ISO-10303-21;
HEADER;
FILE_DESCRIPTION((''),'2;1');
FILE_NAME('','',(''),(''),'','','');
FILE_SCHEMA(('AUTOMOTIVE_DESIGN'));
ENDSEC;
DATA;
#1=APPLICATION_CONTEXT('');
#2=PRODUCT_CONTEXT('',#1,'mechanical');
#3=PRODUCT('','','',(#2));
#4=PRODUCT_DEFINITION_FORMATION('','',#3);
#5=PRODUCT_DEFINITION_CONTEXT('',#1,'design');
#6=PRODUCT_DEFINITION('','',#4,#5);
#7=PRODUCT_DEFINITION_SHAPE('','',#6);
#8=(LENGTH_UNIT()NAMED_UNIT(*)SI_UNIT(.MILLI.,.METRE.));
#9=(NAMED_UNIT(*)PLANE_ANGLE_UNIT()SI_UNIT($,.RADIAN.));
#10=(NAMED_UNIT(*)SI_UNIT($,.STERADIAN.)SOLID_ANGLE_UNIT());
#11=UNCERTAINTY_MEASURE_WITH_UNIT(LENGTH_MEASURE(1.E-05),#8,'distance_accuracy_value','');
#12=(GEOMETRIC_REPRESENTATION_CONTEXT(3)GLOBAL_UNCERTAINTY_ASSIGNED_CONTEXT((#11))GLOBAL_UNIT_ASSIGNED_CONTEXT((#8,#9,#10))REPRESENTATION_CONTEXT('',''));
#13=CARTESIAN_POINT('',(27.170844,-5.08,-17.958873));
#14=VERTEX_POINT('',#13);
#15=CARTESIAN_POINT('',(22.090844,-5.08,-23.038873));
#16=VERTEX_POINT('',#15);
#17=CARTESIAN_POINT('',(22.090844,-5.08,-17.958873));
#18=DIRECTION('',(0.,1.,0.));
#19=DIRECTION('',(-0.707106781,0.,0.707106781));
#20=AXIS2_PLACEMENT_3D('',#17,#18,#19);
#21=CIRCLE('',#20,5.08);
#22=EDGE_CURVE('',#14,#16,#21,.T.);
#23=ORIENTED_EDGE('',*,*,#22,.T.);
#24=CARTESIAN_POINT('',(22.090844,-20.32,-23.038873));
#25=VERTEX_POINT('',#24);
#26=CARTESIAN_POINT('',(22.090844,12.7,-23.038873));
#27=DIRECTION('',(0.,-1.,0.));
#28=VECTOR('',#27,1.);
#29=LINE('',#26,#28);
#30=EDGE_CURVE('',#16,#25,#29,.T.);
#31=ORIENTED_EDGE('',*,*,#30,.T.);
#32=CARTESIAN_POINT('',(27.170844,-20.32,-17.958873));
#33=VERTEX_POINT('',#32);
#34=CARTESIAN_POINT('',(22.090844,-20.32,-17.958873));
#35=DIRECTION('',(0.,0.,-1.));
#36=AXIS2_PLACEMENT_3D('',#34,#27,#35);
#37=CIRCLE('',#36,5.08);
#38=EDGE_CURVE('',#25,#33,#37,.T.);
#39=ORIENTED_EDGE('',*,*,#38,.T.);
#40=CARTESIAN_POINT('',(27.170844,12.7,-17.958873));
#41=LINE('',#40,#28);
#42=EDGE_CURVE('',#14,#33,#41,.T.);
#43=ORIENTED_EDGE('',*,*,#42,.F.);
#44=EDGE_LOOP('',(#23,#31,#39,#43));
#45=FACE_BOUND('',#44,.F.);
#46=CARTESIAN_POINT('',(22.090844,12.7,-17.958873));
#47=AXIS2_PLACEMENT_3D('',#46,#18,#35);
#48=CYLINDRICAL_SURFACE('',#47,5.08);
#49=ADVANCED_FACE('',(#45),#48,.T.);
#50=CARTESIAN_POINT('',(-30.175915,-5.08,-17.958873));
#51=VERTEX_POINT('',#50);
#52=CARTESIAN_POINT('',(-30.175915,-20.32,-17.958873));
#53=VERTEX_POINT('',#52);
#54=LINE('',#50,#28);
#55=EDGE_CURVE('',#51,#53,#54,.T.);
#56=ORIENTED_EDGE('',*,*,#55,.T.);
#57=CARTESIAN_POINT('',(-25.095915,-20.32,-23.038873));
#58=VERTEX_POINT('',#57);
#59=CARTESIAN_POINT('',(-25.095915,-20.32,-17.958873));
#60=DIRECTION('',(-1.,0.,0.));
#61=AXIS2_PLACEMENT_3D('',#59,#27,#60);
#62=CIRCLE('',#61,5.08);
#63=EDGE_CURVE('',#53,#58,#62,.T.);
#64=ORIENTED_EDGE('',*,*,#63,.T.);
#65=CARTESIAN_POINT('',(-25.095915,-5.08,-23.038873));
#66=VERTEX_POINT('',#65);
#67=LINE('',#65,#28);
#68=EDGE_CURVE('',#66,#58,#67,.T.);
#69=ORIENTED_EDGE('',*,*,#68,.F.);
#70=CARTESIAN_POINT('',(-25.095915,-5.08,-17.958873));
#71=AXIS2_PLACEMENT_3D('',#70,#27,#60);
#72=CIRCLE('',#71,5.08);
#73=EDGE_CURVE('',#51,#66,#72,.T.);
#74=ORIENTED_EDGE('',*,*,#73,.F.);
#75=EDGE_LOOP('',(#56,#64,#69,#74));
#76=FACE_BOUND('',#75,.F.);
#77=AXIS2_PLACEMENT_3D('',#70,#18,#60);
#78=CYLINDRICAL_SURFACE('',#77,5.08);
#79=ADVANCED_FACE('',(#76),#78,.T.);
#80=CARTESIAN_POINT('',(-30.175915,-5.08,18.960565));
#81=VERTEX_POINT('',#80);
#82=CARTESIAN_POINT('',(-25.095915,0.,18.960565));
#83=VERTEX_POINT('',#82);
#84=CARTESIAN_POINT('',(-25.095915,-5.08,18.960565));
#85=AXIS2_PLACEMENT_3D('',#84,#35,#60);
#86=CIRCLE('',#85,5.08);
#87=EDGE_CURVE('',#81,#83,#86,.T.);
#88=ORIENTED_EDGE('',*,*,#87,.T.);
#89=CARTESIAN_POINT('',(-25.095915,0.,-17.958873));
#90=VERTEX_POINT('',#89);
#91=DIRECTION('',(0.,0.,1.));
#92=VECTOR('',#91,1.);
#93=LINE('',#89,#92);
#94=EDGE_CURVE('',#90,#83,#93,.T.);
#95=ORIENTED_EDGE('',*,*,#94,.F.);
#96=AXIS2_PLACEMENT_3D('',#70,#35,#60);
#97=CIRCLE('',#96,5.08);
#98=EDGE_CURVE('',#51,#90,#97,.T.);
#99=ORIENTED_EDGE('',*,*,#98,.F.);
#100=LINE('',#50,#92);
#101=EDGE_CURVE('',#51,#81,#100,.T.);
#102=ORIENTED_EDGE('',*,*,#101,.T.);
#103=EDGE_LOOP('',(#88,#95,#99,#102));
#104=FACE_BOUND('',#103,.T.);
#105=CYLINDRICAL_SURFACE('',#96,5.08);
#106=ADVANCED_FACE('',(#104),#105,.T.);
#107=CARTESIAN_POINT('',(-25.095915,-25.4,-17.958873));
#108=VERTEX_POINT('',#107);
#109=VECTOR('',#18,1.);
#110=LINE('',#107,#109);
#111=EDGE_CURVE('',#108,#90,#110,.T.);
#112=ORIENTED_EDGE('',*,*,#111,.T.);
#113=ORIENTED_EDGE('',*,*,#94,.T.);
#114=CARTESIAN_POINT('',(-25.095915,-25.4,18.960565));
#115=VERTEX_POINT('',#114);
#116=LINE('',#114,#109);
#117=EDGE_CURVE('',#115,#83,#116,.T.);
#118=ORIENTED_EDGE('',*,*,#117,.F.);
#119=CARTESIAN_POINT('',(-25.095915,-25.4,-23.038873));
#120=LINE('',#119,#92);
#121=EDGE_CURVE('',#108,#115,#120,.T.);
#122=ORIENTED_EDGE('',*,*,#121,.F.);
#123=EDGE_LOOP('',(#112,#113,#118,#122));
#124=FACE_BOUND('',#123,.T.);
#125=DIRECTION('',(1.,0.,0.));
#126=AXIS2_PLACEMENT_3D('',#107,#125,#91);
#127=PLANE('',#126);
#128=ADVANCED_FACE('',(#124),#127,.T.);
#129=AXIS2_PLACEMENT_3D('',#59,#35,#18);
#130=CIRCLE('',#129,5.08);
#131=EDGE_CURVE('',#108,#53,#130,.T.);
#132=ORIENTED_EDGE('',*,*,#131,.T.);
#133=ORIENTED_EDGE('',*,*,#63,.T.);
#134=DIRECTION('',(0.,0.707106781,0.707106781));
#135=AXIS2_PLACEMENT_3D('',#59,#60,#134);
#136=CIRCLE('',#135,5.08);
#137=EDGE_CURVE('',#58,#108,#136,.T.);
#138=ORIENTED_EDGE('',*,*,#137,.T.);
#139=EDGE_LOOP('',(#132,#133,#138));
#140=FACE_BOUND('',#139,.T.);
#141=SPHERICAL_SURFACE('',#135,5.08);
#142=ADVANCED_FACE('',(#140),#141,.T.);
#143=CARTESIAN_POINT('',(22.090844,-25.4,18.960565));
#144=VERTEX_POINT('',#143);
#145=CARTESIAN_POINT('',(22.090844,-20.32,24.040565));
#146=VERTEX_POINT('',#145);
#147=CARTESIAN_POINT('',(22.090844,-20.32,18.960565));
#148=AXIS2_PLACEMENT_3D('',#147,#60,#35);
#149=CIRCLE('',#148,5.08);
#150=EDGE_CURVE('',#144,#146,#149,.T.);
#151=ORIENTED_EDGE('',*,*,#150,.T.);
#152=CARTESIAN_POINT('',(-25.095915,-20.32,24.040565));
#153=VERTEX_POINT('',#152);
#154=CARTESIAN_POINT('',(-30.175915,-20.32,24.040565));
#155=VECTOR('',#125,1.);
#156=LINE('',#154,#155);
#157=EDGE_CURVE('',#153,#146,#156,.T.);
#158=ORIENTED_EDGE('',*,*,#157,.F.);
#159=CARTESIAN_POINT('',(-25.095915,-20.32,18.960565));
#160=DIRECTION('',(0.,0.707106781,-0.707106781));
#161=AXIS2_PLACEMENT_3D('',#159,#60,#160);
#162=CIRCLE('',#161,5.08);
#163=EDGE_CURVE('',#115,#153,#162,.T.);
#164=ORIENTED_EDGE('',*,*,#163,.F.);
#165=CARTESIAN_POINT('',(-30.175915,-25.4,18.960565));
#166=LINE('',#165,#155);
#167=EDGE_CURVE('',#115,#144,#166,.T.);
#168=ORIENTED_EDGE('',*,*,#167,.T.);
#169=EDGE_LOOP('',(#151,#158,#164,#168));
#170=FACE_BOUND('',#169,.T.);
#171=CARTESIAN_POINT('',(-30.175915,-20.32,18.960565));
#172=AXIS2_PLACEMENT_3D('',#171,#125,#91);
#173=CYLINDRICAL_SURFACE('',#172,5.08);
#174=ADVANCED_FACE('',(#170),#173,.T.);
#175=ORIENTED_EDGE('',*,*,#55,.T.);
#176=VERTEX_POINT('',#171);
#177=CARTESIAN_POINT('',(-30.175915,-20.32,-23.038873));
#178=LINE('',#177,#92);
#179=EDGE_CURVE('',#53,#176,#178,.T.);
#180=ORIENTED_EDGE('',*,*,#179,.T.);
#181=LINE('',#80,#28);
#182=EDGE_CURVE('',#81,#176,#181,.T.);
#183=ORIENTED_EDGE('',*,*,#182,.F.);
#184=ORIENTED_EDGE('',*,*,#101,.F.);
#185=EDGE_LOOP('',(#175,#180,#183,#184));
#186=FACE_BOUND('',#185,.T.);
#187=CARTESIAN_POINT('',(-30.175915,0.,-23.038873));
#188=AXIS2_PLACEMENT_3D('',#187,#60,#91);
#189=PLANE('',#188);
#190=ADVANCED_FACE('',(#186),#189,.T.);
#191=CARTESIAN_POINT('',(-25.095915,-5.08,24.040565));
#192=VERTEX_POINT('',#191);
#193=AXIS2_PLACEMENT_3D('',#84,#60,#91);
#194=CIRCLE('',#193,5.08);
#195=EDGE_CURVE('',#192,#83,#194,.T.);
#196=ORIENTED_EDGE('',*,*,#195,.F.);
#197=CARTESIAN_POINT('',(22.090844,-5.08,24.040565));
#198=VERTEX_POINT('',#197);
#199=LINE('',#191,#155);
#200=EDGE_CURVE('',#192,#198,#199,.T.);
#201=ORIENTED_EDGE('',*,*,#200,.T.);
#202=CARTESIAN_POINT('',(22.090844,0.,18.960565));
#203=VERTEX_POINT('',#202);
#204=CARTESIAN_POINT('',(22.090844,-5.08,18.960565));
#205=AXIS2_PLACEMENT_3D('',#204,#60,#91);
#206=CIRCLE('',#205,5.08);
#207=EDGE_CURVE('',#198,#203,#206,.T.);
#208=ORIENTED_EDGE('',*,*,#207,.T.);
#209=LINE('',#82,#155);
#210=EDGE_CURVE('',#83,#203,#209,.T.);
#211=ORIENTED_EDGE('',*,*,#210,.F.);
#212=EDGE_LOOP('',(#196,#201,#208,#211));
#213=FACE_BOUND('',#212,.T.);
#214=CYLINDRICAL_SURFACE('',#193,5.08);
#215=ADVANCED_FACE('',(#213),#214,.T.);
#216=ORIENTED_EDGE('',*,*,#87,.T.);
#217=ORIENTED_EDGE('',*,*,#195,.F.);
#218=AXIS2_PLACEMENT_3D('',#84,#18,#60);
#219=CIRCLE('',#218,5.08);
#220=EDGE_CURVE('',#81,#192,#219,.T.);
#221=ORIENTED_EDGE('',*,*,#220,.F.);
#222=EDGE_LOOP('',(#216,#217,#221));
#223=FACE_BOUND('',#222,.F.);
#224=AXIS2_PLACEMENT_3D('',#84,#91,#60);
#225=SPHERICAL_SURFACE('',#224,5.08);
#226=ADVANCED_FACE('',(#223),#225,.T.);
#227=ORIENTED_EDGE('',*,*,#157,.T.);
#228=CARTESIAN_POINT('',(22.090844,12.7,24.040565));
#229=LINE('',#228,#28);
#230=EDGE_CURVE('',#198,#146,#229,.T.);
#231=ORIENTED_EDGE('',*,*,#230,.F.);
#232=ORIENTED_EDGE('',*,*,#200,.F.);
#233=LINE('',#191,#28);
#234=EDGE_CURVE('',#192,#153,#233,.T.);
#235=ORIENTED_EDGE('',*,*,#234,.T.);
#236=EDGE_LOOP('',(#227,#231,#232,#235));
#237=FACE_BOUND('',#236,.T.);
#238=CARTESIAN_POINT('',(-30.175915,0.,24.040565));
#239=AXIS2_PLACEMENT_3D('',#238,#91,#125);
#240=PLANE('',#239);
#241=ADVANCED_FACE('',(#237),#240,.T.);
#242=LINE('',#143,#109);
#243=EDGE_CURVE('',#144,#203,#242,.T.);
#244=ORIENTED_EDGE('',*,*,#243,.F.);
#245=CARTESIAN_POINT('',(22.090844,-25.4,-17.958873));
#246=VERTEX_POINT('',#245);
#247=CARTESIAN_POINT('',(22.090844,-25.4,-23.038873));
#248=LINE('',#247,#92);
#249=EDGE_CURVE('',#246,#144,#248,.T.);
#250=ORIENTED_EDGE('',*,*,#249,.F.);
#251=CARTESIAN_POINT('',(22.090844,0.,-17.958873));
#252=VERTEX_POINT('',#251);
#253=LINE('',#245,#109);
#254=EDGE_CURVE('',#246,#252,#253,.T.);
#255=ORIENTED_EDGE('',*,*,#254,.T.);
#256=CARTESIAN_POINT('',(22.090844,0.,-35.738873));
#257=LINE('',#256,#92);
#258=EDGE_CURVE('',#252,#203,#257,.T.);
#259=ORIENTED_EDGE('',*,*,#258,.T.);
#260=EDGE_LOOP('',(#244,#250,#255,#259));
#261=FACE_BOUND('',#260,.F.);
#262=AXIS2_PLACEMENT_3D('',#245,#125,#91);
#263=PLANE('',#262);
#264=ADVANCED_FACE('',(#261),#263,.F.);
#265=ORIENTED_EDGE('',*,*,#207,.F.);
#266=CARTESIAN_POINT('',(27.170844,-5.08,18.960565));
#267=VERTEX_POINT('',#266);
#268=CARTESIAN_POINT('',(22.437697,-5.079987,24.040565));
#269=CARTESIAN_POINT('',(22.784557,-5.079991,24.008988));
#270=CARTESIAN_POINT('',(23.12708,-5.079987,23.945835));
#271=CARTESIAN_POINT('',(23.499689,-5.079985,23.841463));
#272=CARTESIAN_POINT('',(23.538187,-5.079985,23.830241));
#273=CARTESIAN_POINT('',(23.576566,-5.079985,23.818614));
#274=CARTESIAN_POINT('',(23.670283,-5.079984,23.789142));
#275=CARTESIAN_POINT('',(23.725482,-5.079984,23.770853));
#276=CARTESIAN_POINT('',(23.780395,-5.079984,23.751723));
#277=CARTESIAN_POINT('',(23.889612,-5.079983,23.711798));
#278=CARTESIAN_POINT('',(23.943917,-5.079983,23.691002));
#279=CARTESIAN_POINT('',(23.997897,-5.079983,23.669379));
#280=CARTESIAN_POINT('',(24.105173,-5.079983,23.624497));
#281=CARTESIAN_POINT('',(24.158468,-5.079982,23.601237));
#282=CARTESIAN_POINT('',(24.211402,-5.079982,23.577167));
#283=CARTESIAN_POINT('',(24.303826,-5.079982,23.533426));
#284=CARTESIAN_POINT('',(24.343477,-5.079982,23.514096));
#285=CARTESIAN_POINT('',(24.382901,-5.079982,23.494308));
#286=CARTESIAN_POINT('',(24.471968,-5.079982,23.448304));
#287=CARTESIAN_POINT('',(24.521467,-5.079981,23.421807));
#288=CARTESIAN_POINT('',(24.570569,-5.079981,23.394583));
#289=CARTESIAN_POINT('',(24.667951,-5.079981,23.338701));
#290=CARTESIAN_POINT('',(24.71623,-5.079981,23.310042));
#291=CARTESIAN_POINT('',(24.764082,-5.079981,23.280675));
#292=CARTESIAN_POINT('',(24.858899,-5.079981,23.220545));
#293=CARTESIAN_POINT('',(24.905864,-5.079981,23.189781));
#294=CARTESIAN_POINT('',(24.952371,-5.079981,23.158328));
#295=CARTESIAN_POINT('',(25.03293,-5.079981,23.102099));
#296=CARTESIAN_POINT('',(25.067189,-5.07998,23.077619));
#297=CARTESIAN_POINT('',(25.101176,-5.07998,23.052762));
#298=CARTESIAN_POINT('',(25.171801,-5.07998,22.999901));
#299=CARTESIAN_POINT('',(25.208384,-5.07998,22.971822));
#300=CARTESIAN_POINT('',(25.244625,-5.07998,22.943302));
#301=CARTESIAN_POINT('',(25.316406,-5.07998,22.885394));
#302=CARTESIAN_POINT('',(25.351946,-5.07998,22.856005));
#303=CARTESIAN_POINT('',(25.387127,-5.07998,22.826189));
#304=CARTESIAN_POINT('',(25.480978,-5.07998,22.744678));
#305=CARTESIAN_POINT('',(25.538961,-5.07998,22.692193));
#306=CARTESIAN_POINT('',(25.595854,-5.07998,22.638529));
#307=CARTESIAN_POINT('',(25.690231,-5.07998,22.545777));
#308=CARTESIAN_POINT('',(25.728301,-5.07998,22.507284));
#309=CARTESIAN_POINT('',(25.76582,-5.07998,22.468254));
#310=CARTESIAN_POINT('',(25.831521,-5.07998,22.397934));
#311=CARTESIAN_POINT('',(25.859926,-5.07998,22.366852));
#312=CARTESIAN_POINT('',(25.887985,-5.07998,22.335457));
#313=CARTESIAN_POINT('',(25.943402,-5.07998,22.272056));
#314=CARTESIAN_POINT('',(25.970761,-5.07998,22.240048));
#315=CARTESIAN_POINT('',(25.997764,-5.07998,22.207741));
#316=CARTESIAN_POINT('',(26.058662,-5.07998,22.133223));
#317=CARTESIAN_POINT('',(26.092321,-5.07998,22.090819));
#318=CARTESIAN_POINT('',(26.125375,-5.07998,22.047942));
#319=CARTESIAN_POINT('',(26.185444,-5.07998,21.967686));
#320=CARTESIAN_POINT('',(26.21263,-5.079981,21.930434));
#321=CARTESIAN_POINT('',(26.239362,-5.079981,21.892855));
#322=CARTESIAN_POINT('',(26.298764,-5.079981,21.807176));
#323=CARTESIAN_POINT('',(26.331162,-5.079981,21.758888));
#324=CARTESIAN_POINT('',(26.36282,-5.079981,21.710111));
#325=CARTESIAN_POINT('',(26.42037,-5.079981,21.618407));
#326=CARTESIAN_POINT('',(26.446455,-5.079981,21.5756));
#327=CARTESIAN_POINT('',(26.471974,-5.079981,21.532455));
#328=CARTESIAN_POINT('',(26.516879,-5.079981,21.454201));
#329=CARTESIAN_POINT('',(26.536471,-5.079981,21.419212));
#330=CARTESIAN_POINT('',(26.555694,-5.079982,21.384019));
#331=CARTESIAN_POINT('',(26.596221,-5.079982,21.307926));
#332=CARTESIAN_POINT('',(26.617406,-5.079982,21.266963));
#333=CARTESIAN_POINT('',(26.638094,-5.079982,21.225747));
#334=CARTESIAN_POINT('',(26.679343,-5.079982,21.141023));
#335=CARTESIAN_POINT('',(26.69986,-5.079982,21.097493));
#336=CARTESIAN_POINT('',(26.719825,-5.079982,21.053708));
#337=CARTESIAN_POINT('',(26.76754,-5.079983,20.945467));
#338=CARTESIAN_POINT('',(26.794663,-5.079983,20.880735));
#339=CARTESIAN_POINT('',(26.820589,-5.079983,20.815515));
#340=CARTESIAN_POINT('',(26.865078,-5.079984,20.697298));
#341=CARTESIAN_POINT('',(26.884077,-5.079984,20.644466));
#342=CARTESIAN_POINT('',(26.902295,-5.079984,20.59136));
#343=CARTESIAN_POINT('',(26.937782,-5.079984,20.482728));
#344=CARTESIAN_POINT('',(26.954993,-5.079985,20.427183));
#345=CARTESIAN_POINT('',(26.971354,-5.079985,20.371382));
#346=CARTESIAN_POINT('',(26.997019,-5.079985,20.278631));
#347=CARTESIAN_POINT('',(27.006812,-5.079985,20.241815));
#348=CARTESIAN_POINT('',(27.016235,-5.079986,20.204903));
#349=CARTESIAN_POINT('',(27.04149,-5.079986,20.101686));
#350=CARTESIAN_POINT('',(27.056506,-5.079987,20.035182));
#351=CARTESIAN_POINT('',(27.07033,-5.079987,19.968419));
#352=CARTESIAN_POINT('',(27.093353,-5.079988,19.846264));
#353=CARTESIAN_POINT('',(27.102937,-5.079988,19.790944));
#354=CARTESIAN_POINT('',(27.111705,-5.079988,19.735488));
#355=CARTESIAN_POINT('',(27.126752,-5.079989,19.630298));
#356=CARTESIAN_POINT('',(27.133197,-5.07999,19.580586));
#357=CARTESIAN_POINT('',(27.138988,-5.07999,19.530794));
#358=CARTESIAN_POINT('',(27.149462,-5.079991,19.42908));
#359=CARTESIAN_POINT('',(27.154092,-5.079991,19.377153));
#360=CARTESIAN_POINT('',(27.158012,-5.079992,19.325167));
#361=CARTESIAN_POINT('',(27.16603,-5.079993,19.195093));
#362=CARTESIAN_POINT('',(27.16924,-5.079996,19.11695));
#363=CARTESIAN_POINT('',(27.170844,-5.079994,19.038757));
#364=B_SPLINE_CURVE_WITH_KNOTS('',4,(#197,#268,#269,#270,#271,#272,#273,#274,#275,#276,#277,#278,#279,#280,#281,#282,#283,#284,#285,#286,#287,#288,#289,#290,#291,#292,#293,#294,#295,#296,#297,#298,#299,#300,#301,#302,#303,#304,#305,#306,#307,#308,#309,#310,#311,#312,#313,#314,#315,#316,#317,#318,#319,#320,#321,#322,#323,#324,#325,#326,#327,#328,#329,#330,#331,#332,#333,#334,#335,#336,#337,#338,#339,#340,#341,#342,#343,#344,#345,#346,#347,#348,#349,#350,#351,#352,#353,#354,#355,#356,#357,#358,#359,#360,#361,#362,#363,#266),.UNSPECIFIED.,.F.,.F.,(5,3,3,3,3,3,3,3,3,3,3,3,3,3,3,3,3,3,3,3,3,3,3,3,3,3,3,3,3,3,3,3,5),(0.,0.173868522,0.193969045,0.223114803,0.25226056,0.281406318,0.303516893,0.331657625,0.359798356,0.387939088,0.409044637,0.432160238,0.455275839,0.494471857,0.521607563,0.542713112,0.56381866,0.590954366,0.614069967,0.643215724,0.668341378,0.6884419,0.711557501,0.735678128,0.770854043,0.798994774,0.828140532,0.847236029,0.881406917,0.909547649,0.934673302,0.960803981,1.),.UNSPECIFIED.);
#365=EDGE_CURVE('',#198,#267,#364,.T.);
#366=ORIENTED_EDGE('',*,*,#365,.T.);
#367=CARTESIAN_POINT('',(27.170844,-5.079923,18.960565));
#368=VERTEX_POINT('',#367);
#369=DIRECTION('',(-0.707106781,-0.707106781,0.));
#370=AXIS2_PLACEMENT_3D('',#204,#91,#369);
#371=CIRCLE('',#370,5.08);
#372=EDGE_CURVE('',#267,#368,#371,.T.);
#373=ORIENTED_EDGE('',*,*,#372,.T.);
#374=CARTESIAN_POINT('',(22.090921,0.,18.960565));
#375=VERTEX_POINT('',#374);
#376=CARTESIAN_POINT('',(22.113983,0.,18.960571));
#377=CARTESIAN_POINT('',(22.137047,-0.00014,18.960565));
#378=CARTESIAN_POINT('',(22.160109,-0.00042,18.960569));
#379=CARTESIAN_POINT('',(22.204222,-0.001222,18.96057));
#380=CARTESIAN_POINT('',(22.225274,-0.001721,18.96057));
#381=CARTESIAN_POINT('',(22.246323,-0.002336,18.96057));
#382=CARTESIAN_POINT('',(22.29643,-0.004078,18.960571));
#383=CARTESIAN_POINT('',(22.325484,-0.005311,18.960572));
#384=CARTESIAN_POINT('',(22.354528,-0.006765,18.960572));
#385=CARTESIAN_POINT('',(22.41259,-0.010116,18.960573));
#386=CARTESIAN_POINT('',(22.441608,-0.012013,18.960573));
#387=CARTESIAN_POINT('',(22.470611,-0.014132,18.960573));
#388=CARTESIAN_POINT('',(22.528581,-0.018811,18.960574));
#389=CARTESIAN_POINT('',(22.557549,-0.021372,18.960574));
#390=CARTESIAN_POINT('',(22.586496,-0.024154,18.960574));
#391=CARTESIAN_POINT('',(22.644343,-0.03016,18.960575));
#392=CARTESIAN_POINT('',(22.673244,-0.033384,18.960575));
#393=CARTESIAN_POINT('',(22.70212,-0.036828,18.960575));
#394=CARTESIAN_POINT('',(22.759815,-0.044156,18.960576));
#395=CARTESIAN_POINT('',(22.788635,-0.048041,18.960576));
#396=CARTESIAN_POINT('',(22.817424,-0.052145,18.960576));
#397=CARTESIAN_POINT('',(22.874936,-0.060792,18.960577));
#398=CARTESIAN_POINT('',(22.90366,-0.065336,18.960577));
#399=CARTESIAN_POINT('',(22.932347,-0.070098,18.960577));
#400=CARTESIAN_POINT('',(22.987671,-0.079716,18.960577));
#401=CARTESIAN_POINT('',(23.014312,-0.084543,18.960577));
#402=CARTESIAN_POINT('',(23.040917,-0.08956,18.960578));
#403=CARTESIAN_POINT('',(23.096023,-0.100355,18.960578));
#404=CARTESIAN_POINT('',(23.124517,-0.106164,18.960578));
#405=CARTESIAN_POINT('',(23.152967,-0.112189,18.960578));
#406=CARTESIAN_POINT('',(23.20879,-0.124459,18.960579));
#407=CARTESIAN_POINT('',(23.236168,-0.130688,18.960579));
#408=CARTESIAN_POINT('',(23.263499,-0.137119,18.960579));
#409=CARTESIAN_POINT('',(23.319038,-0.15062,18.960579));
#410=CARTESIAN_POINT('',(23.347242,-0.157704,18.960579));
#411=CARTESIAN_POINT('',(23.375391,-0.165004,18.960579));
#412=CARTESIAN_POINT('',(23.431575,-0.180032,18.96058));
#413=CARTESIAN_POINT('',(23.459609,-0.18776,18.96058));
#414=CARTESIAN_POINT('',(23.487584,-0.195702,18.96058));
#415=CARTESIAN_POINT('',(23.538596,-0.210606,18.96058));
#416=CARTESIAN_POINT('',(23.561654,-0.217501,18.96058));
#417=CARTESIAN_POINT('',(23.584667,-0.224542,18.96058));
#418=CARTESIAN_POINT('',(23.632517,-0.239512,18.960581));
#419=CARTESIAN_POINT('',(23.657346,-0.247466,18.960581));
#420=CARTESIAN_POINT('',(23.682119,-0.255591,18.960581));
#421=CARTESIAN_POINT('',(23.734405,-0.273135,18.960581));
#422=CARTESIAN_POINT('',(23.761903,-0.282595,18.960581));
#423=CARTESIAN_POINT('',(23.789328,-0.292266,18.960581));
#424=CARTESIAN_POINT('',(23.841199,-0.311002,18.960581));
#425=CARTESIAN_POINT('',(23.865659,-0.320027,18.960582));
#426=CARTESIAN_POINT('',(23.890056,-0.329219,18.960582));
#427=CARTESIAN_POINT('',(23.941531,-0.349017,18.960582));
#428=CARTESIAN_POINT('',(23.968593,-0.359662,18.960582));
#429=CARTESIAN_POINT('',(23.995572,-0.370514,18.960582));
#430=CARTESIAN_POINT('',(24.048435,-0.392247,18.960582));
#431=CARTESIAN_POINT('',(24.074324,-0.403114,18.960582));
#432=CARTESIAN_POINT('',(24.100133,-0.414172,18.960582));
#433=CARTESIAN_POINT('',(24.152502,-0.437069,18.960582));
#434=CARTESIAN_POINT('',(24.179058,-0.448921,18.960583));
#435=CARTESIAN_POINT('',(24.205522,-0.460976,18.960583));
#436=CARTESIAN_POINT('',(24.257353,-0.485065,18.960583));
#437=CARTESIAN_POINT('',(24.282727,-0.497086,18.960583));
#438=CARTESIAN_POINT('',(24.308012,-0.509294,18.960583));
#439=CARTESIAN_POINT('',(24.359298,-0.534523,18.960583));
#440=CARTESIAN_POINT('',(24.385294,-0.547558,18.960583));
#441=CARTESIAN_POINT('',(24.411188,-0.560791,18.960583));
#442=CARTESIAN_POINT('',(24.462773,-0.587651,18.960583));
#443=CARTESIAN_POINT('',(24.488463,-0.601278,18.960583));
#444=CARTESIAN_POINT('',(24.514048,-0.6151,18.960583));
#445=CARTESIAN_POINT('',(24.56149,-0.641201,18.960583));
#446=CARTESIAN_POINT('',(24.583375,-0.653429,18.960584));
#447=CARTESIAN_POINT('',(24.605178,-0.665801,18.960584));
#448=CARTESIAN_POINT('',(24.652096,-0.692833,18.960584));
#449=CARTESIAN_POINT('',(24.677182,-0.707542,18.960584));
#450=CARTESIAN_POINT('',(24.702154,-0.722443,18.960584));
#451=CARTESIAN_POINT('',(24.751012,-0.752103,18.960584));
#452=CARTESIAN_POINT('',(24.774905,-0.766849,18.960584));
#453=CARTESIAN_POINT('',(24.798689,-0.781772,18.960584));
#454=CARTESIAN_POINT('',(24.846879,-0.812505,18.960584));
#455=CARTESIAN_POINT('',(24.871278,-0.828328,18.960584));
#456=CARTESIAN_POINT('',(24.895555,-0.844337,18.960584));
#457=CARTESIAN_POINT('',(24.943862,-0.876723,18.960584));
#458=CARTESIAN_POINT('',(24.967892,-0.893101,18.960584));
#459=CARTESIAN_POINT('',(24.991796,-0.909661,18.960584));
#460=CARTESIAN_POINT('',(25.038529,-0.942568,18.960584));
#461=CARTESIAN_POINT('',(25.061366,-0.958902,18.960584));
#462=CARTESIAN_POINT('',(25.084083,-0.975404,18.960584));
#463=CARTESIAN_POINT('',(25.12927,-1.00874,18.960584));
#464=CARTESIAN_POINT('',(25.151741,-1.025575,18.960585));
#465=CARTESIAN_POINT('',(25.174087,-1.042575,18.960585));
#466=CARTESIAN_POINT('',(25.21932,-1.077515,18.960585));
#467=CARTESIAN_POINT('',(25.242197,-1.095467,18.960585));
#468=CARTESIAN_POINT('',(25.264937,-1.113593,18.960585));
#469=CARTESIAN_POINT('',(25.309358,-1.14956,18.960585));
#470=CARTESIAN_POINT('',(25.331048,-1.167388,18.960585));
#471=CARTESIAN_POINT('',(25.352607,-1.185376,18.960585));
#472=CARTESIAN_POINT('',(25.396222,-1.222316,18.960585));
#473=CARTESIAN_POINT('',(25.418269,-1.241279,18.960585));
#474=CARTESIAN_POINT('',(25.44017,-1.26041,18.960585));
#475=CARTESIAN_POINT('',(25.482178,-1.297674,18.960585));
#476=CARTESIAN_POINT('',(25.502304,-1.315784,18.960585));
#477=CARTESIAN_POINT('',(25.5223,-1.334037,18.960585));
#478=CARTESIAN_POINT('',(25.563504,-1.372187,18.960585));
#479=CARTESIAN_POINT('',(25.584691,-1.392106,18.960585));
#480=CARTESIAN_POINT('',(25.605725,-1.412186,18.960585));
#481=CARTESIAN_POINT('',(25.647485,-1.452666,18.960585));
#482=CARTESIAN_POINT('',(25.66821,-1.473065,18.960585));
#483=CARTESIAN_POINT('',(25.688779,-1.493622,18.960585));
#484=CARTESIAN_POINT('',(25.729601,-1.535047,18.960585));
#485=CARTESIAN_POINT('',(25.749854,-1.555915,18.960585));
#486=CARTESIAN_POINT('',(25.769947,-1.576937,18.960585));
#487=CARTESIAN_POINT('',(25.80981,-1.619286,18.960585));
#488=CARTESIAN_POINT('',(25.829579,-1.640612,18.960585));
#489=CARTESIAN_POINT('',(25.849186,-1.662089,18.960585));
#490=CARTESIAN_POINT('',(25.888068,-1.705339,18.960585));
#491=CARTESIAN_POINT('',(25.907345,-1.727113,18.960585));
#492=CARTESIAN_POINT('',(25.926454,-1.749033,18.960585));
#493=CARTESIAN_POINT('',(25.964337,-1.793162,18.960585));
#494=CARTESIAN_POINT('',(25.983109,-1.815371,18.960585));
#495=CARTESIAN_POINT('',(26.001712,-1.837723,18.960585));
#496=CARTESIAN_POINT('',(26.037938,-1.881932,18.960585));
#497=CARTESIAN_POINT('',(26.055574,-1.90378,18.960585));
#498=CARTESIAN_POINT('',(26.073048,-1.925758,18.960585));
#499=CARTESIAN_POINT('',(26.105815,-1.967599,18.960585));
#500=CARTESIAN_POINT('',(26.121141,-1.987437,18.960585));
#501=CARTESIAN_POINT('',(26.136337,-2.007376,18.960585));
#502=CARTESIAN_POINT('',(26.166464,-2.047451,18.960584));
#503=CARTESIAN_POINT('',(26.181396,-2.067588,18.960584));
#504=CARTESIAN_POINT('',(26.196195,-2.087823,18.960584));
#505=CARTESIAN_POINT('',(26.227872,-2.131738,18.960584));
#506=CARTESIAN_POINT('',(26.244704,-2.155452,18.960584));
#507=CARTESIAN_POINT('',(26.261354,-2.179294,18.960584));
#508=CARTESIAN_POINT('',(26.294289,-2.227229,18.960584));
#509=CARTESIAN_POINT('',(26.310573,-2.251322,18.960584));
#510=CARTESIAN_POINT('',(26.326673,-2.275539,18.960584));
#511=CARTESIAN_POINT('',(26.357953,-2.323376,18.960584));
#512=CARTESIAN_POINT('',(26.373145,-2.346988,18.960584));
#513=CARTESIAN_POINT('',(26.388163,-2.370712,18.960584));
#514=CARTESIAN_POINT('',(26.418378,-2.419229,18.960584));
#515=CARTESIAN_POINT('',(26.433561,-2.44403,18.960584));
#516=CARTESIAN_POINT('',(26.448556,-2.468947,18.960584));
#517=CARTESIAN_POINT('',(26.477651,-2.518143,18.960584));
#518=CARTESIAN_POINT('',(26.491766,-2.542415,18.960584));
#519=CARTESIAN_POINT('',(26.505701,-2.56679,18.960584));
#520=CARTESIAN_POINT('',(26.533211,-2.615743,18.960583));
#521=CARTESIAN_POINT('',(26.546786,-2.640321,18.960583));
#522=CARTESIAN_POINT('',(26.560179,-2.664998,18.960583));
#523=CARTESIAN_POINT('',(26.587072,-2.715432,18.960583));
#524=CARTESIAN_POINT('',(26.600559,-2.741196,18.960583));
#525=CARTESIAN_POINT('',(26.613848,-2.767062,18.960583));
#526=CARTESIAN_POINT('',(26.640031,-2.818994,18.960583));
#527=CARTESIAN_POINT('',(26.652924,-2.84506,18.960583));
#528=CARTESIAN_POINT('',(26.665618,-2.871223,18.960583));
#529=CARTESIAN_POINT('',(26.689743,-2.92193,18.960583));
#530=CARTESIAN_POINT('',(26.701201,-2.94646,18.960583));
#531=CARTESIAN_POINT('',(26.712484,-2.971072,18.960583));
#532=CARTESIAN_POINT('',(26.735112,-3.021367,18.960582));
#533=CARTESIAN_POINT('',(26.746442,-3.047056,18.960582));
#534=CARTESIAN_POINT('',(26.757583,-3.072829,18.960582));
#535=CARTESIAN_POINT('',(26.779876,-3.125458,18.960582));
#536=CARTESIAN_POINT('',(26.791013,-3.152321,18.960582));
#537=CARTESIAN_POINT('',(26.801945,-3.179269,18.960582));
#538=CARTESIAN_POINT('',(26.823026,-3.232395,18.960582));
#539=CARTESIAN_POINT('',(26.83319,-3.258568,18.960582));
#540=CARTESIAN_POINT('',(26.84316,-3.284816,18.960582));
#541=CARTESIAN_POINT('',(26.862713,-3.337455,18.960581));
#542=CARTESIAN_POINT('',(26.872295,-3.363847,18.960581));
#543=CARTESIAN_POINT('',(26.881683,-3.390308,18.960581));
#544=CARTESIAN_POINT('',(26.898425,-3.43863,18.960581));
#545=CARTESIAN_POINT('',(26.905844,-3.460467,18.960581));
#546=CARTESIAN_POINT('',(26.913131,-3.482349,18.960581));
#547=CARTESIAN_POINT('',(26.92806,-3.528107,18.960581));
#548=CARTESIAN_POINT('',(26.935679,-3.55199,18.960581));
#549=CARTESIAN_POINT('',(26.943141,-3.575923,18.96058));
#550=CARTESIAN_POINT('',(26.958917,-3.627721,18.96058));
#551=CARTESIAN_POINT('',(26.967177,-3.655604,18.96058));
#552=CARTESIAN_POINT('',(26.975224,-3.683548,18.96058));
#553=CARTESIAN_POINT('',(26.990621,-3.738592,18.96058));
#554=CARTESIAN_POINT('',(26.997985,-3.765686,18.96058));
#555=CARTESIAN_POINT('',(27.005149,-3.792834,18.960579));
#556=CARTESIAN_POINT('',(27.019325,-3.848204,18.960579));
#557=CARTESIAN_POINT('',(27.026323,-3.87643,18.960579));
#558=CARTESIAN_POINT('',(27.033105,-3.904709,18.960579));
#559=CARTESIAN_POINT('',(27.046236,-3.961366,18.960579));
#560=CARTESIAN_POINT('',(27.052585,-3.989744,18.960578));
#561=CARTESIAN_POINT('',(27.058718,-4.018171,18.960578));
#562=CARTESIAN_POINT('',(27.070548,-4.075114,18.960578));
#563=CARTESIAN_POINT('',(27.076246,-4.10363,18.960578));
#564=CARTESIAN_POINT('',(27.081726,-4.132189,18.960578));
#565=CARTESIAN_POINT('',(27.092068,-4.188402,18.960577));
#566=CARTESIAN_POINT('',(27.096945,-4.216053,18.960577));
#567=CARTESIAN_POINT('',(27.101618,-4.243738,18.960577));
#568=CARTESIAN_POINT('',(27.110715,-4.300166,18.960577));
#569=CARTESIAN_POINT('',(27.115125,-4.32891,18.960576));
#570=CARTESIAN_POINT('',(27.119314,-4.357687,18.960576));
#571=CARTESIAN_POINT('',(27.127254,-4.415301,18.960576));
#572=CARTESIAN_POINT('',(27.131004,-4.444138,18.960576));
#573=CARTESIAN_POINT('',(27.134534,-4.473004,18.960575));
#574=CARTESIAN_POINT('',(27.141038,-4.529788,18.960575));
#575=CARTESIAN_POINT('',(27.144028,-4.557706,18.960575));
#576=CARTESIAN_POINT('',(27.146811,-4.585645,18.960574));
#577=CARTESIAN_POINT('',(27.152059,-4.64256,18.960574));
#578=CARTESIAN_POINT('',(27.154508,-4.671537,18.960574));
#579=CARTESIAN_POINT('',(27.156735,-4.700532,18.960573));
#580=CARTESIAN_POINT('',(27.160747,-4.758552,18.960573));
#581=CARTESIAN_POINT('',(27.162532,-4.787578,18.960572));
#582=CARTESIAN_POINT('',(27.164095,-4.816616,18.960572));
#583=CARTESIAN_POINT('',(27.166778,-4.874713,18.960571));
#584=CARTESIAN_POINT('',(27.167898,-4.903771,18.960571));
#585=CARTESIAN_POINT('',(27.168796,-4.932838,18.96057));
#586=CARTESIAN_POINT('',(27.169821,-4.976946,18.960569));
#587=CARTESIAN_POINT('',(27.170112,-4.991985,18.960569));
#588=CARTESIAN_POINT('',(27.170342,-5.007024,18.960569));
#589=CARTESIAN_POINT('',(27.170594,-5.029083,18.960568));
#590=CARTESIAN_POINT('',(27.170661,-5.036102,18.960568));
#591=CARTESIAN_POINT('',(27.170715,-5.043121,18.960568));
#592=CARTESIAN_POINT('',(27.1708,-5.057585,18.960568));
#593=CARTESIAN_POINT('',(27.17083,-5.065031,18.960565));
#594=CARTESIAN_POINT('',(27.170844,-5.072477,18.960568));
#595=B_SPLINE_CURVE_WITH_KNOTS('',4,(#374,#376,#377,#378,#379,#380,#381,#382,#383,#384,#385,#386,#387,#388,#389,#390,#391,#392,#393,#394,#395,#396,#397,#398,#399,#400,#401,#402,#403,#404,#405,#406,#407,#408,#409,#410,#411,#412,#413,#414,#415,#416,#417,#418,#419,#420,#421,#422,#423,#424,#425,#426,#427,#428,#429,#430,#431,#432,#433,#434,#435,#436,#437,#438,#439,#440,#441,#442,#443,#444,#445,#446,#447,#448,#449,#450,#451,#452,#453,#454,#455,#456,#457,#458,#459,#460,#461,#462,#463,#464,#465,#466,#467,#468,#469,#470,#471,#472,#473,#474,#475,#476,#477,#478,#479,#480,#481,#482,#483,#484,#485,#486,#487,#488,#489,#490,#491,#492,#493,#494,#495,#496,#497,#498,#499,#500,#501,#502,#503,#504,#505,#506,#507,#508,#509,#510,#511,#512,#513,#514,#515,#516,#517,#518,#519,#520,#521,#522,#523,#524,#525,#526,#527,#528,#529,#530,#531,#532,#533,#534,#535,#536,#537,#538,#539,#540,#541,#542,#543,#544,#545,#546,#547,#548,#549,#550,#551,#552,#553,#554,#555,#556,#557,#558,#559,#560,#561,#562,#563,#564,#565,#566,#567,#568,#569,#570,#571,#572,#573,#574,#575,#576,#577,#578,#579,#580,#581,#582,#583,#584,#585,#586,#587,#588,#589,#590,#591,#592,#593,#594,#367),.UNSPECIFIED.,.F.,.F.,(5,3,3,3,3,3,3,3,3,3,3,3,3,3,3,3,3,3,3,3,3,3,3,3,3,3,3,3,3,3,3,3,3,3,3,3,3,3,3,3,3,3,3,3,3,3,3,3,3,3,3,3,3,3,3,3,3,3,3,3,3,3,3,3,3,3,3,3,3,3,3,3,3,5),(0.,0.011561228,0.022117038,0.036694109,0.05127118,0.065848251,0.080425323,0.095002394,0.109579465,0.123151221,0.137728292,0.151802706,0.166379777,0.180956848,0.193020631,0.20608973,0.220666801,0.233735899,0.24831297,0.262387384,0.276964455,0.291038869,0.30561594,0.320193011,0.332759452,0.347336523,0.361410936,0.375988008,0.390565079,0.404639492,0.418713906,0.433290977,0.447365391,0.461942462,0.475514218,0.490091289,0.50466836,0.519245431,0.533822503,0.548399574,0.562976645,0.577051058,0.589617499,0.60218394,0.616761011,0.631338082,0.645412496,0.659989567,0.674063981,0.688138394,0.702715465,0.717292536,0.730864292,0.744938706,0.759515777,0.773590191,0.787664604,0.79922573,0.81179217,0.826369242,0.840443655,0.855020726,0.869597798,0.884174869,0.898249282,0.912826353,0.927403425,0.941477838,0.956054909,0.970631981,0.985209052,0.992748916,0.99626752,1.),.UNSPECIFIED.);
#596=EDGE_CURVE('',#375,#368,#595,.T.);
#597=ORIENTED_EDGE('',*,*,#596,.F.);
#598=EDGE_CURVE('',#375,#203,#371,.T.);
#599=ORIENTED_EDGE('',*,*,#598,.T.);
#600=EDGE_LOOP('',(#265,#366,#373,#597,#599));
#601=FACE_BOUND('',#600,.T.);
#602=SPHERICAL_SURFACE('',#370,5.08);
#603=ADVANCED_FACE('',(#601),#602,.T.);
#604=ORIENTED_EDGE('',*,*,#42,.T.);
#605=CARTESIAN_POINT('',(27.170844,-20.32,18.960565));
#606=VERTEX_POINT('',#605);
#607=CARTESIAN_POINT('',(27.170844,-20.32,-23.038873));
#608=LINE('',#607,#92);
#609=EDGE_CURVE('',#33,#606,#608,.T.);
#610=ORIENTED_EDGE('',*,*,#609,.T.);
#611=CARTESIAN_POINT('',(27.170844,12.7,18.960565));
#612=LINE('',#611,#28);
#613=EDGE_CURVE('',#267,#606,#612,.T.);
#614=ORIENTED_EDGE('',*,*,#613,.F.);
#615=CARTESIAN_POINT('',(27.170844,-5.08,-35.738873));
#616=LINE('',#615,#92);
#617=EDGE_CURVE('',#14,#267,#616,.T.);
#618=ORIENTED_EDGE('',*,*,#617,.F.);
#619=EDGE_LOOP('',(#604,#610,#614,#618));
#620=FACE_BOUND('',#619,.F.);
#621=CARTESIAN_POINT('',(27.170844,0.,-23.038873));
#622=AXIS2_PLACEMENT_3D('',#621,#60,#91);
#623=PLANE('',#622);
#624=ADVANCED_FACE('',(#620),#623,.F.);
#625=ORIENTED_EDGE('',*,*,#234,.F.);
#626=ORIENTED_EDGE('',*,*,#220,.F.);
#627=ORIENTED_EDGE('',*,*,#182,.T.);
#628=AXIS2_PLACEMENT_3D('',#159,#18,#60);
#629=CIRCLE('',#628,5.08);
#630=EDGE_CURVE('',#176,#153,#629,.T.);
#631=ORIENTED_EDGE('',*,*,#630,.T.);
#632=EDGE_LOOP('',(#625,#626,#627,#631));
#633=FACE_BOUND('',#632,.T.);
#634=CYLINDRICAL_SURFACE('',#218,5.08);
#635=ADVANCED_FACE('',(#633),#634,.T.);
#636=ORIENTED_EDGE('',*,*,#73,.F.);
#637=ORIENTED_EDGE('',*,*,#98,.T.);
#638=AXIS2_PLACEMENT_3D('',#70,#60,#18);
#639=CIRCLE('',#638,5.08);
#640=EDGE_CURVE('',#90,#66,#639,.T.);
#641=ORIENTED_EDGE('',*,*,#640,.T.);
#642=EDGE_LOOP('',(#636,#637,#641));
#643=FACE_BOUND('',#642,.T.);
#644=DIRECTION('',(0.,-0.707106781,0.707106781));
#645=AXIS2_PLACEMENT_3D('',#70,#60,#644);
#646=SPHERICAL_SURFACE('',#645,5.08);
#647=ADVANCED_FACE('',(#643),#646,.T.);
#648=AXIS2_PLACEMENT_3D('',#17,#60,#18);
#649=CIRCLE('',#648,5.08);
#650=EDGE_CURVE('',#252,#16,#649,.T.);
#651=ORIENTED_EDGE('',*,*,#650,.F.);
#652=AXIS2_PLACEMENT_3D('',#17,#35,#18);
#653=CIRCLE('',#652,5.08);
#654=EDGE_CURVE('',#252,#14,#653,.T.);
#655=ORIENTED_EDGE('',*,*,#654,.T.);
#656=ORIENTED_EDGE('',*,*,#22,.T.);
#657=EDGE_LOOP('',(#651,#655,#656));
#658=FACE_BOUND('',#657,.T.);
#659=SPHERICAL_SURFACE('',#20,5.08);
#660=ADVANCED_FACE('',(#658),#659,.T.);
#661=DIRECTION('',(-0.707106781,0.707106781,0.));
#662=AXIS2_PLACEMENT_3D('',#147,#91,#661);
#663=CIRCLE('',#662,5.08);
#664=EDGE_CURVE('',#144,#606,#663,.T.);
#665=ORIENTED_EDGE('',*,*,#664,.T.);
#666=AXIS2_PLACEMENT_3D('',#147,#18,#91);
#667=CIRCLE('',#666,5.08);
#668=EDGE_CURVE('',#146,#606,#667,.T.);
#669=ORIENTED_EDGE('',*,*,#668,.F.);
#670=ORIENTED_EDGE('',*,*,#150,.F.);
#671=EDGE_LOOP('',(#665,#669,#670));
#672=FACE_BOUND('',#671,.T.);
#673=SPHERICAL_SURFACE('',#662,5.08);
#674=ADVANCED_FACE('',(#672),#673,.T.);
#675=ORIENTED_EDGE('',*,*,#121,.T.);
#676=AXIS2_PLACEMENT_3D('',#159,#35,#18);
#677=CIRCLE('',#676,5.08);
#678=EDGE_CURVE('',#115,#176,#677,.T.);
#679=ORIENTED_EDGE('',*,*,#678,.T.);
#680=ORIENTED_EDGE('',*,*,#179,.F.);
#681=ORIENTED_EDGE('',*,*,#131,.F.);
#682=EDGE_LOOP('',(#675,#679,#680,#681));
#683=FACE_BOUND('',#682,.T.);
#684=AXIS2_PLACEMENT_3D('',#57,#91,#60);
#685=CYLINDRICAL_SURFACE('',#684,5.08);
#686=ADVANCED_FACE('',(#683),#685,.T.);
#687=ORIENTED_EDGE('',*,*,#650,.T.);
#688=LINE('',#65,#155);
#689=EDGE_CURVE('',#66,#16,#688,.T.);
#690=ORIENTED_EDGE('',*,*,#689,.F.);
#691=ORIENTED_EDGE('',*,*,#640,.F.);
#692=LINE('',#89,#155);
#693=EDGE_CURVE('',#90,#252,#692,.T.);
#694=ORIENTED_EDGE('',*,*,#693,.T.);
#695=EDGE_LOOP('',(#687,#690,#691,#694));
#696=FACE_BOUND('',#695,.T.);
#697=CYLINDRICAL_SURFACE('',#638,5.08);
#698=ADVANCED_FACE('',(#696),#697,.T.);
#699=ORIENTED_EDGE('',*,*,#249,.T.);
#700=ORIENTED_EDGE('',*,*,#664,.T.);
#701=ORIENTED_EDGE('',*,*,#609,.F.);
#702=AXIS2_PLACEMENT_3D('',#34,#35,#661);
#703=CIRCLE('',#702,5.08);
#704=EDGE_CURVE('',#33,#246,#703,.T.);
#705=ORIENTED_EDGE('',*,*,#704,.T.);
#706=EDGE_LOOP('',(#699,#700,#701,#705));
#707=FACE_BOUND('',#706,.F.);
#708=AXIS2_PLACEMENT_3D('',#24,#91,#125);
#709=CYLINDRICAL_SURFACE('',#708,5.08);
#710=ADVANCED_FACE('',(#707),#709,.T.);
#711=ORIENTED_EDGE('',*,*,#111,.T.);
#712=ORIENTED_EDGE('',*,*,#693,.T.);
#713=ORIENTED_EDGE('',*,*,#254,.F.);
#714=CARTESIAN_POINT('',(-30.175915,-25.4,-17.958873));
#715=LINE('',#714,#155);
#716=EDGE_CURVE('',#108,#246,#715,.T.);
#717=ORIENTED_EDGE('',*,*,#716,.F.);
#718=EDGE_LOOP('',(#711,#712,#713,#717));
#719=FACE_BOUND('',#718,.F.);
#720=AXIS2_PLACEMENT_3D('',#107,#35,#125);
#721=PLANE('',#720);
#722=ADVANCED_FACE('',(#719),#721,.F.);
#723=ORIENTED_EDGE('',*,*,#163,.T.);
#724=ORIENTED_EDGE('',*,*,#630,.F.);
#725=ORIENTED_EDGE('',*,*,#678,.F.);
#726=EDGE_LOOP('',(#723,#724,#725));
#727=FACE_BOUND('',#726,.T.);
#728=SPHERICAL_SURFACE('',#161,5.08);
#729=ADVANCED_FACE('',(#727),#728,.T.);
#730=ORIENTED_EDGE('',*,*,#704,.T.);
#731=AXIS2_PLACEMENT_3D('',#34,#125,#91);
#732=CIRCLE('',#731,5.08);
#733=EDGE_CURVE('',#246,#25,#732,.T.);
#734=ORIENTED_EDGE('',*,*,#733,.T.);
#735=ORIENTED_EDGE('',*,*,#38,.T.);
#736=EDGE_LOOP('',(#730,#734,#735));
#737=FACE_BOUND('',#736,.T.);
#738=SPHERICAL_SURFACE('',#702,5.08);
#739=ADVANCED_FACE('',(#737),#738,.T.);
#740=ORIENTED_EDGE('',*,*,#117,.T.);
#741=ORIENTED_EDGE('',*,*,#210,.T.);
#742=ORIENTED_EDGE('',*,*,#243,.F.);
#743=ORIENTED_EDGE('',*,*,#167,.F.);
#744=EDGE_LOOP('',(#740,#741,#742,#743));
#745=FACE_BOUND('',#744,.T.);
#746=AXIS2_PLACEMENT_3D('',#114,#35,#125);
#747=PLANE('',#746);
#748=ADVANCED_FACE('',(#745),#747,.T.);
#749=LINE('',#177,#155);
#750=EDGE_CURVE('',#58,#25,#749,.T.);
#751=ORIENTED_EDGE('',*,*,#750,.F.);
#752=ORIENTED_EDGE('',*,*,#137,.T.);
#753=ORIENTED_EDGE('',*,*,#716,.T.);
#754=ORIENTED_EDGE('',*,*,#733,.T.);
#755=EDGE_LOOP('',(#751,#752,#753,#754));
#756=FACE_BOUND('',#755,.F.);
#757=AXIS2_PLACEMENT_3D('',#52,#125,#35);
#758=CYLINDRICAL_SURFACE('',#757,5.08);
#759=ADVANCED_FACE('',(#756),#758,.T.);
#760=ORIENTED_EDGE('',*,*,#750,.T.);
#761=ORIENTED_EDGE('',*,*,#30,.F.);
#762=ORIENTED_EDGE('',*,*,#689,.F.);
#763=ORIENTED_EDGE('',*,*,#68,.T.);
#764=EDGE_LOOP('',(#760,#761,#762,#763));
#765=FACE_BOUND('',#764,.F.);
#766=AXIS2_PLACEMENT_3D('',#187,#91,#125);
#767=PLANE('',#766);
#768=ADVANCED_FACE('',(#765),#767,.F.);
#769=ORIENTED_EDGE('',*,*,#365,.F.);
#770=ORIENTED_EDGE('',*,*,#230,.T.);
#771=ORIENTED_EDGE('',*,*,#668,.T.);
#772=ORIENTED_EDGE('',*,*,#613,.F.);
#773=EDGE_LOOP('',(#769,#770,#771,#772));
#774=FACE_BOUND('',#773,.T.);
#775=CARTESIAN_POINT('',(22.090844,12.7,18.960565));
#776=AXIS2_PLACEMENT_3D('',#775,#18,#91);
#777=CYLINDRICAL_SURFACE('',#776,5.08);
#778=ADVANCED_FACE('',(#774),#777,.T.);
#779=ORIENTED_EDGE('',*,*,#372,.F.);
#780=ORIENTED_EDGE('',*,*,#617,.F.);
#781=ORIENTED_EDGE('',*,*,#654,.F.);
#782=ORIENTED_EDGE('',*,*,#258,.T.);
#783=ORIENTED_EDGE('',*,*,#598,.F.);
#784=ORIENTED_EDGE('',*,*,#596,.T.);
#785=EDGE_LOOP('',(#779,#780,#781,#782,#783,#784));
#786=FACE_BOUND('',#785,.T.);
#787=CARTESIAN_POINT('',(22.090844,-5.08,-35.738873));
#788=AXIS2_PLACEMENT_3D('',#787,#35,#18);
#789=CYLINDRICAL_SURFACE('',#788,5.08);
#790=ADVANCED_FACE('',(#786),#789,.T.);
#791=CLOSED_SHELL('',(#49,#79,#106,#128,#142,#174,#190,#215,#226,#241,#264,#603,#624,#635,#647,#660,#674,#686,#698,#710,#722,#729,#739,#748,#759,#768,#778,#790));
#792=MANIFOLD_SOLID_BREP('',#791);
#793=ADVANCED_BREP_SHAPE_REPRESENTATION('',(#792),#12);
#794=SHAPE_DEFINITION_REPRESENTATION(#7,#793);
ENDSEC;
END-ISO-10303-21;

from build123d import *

# Parameters (mm, degrees)
F0_W         = 57.346759364
F0_H         = 47.0794383436
F1_DEPTH     = 25.4
F2_R         = 5.08
F3_T1_DEPTH  = 33.02
F3_T3_DEPTH  = 72.4794383436
F3_S7_W      = 5.08
F3_S7_H      = 5.08
F3_T8_DEPTH  = 5.08
F3_S13_W     = 5.08
F3_S13_H     = 5.08
F3_T14_DEPTH = 5.08
F4_T1_DEPTH  = 47.186759364
F4_T3_DEPTH  = 15.24
F4_T5_DEPTH  = 54.6994383436
F4_S9_W      = 5.08
F4_S9_H      = 5.08
F4_T10_DEPTH = 5.08
F4_S15_W     = 5.08
F4_S15_H     = 5.08
F4_T16_DEPTH = 5.08
F4_S21_W     = 5.08
F4_S21_H     = 5.08
F4_T22_DEPTH = 5.08
F5_T1_DEPTH  = 47.186759364
F5_T3_DEPTH  = 15.24
F5_S7_W      = 5.08
F5_S7_H      = 5.08
F5_T8_DEPTH  = 5.08
F5_S13_W     = 5.08
F5_S13_H     = 5.08
F5_T14_DEPTH = 5.08
F5_T18_ANGLE = 89.9999999979
F6_DEPTH     = 25.4


# Not quite as in the source:
# - a fillet or chamfer that OpenCascade refuses, or shapes differently, is made with other operations: its cross-section is extruded or revolved along the edge and cut away or added


with BuildPart() as f1:
    # F0 (on Front) → F1 (new body)
    with BuildSketch(Plane.XZ):
        with Locations((-1.5025353059, 0.5008457229)):
            Rectangle(F0_W, F0_H)
    extrude(amount=F1_DEPTH)

    # F2
    f2_edges = [f1.edges().sort_by_distance(p)[0] for p in [
        (-30.175915, -25.4, 0.500846),
        (-1.502535, -25.4, -23.038873),
        (27.170844, -25.4, 0.500846),
        (-1.502535, -25.4, 24.040565),
    ]]
    fillet(f2_edges, radius=F2_R)

    # F3: fillet of radius 5.08 on 3 edges, made by hand

    # F3_s2 → F3_t1 (cut)
    with BuildSketch(Plane.XZ.offset(-12.7)):
        with BuildLine():
            ThreePointArc((22.0908443761, 24.0405648947), (25.6829468245, 22.5526673431), (27.1708443761, 18.9605648947))
            Line((27.1708443761, 18.9605648947), (27.1708443761, 24.0405648947))
            Line((27.1708443761, 24.0405648947), (22.0908443761, 24.0405648947))
        make_face()
        with BuildLine():
            ThreePointArc((22.0908443761, -23.038873449), (25.6829468245, -21.5509758974), (27.1708443761, -17.958873449))
            Line((27.1708443761, -17.958873449), (27.1708443761, -23.038873449))
            Line((27.1708443761, -23.038873449), (22.0908443761, -23.038873449))
        make_face()
    extrude(amount=F3_T1_DEPTH, mode=Mode.SUBTRACT)

    # F3_s4 → F3_t3 (cut)
    with BuildSketch(Plane.XY.offset(-35.738873449)):
        with BuildLine():
            ThreePointArc((22.0908443761, 0), (25.6829468245, -1.4878975516), (27.1708443761, -5.08))
            Line((27.1708443761, -5.08), (27.1708443761, 0))
            Line((27.1708443761, 0), (22.0908443761, 0))
        make_face()
    extrude(amount=F3_T3_DEPTH, mode=Mode.SUBTRACT)


with BuildPart() as f3_tool6:
    # F3_s7 → F3_t8 (new body)
    with BuildSketch(Plane.XY.offset(-17.958873449)):
        with Locations((24.6308443761, -22.86)):
            Rectangle(F3_S7_W, F3_S7_H)
    extrude(amount=-F3_T8_DEPTH)

    # F3_s9 → F3_t10 (revolve, cut)
    with BuildSketch(Plane(origin=(22.0908443761, -20.32, -17.958873449), x_dir=(-0.7071067812, 0.7071067812, 0), z_dir=(-0.7071067812, -0.7071067812, 0))):
        with BuildLine():
            ThreePointArc((0, -5.08), (5.08, 0), (0, 5.08))
            Line((0, 5.08), (0, -5.08))
        make_face()
    revolve(axis=Axis((22.0908443761, -20.32, -17.958873449), (0, 0, -1)), mode=Mode.SUBTRACT)


with BuildPart() as f1_1:
    add(f1.part)

    # F3_t5: cut F3_tool6
    add(f3_tool6.part, mode=Mode.SUBTRACT)


with BuildPart() as f3_tool12:
    # F3_s13 → F3_t14 (new body)
    with BuildSketch(Plane.XY.offset(18.9605648947)):
        with Locations((24.6308443761, -22.86)):
            Rectangle(F3_S13_W, F3_S13_H)
    extrude(amount=F3_T14_DEPTH)

    # F3_s15 → F3_t16 (revolve, cut)
    with BuildSketch(Plane(origin=(22.0908443761, -20.32, 18.9605648947), x_dir=(-0.7071067812, 0.7071067812, 0), z_dir=(0.7071067812, 0.7071067812, 0))):
        with BuildLine():
            ThreePointArc((0, -5.08), (5.08, 0), (0, 5.08))
            Line((0, 5.08), (0, -5.08))
        make_face()
    revolve(axis=Axis((22.0908443761, -20.32, 18.9605648947), (0, 0, 1)), mode=Mode.SUBTRACT)


with BuildPart() as f1_2:
    add(f1_1.part)

    # F3_t11: cut F3_tool12
    add(f3_tool12.part, mode=Mode.SUBTRACT)

    # F4: fillet of radius 5.08 on 3 edges, made by hand

    # F4_s2 → F4_t1 (cut)
    with BuildSketch(Plane.YZ.offset(-25.0959149879)):
        with BuildLine():
            ThreePointArc((0, -17.958873449), (-1.4878975516, -21.5509758974), (-5.08, -23.038873449))
            Line((-5.08, -23.038873449), (0, -23.038873449))
            Line((0, -23.038873449), (0, -17.958873449))
        make_face()
    extrude(amount=F4_T1_DEPTH, mode=Mode.SUBTRACT)

    # F4_s4 → F4_t3 (cut)
    with BuildSketch(Plane.XZ.offset(5.08)):
        with BuildLine():
            ThreePointArc((-30.1759149879, -17.958873449), (-28.6880174363, -21.5509758974), (-25.0959149879, -23.038873449))
            Line((-25.0959149879, -23.038873449), (-30.1759149879, -23.038873449))
            Line((-30.1759149879, -23.038873449), (-30.1759149879, -17.958873449))
        make_face()
    extrude(amount=F4_T3_DEPTH, mode=Mode.SUBTRACT)

    # F4_s6 → F4_t5 (cut)
    with BuildSketch(Plane.XY.offset(-17.958873449)):
        with BuildLine():
            ThreePointArc((-30.1759149879, -5.08), (-28.6880174363, -1.4878975516), (-25.0959149879, 0))
            Line((-25.0959149879, 0), (-30.1759149879, 0))
            Line((-30.1759149879, 0), (-30.1759149879, -5.08))
        make_face()
    extrude(amount=F4_T5_DEPTH, mode=Mode.SUBTRACT)


with BuildPart() as f4_tool8:
    # F4_s9 → F4_t10 (new body)
    with BuildSketch(Plane.YZ.offset(-25.0959149879)):
        with Locations((-22.86, -20.498873449)):
            Rectangle(F4_S9_W, F4_S9_H)
    extrude(amount=-F4_T10_DEPTH)

    # F4_s11 → F4_t12 (revolve, cut)
    with BuildSketch(Plane(origin=(-25.0959149879, -20.32, -17.958873449), x_dir=(0, 0.7071067812, 0.7071067812), z_dir=(0, -0.7071067812, 0.7071067812))):
        with BuildLine():
            ThreePointArc((0, -5.08), (5.08, 0), (0, 5.08))
            Line((0, 5.08), (0, -5.08))
        make_face()
    revolve(axis=Axis((-25.0959149879, -20.32, -17.958873449), (-1, 0, 0)), mode=Mode.SUBTRACT)


with BuildPart() as f1_3:
    add(f1_2.part)

    # F4_t7: cut F4_tool8
    add(f4_tool8.part, mode=Mode.SUBTRACT)


with BuildPart() as f4_tool14:
    # F4_s15 → F4_t16 (new body)
    with BuildSketch(Plane.XZ.offset(5.08)):
        with Locations((24.6308443761, -20.498873449)):
            Rectangle(F4_S15_W, F4_S15_H)
    extrude(amount=-F4_T16_DEPTH)

    # F4_s17 → F4_t18 (revolve, cut)
    with BuildSketch(Plane(origin=(22.0908443761, -5.08, -17.958873449), x_dir=(-0.7071067812, 0, 0.7071067812), z_dir=(-0.7071067812, 0, -0.7071067812))):
        with BuildLine():
            ThreePointArc((0, -5.08), (5.08, 0), (0, 5.08))
            Line((0, 5.08), (0, -5.08))
        make_face()
    revolve(axis=Axis((22.0908443761, -5.08, -17.958873449), (0, 1, 0)), mode=Mode.SUBTRACT)


with BuildPart() as f1_4:
    add(f1_3.part)

    # F4_t13: cut F4_tool14
    add(f4_tool14.part, mode=Mode.SUBTRACT)


with BuildPart() as f4_tool20:
    # F4_s21 → F4_t22 (new body)
    with BuildSketch(Plane.YZ.offset(-25.0959149879)):
        with Locations((-2.54, -20.498873449)):
            Rectangle(F4_S21_W, F4_S21_H)
    extrude(amount=-F4_T22_DEPTH)

    # F4_s23 → F4_t24 (revolve, cut)
    with BuildSketch(Plane(origin=(-25.0959149879, -5.08, -17.958873449), x_dir=(0, -0.7071067812, 0.7071067812), z_dir=(0, -0.7071067812, -0.7071067812))):
        with BuildLine():
            ThreePointArc((0, -5.08), (5.08, 0), (0, 5.08))
            Line((0, 5.08), (0, -5.08))
        make_face()
    revolve(axis=Axis((-25.0959149879, -5.08, -17.958873449), (-1, 0, 0)), mode=Mode.SUBTRACT)


with BuildPart() as f1_5:
    add(f1_4.part)

    # F4_t19: cut F4_tool20
    add(f4_tool20.part, mode=Mode.SUBTRACT)

    # F5: fillet of radius 5.08 on 2 edges, made by hand

    # F5_s2 → F5_t1 (cut)
    with BuildSketch(Plane.YZ.offset(-25.0959149879)):
        with BuildLine():
            ThreePointArc((-5.08, 24.0405648947), (-1.4878975516, 22.5526673431), (0, 18.9605648947))
            Line((0, 18.9605648947), (0, 24.0405648947))
            Line((0, 24.0405648947), (-5.08, 24.0405648947))
        make_face()
    extrude(amount=F5_T1_DEPTH, mode=Mode.SUBTRACT)

    # F5_s4 → F5_t3 (cut)
    with BuildSketch(Plane.XZ.offset(5.08)):
        with BuildLine():
            ThreePointArc((-30.1759149879, 18.9605648947), (-28.6880174363, 22.5526673431), (-25.0959149879, 24.0405648947))
            Line((-25.0959149879, 24.0405648947), (-30.1759149879, 24.0405648947))
            Line((-30.1759149879, 24.0405648947), (-30.1759149879, 18.9605648947))
        make_face()
    extrude(amount=F5_T3_DEPTH, mode=Mode.SUBTRACT)


with BuildPart() as f5_tool6:
    # F5_s7 → F5_t8 (new body)
    with BuildSketch(Plane.YZ.offset(-25.0959149879)):
        with Locations((-22.86, 21.5005648947)):
            Rectangle(F5_S7_W, F5_S7_H)
    extrude(amount=-F5_T8_DEPTH)

    # F5_s9 → F5_t10 (revolve, cut)
    with BuildSketch(Plane(origin=(-25.0959149879, -20.32, 18.9605648947), x_dir=(0, 0.7071067812, -0.7071067812), z_dir=(0, 0.7071067812, 0.7071067812))):
        with BuildLine():
            ThreePointArc((0, -5.08), (5.08, 0), (0, 5.08))
            Line((0, 5.08), (0, -5.08))
        make_face()
    revolve(axis=Axis((-25.0959149879, -20.32, 18.9605648947), (-1, 0, 0)), mode=Mode.SUBTRACT)


with BuildPart() as f1_6:
    add(f1_5.part)

    # F5_t5: cut F5_tool6
    add(f5_tool6.part, mode=Mode.SUBTRACT)


with BuildPart() as f5_tool12:
    # F5_s13 → F5_t14 (new body)
    with BuildSketch(Plane.XY.offset(18.9605648947)):
        with Locations((24.6308443761, -2.54)):
            Rectangle(F5_S13_W, F5_S13_H)
    extrude(amount=F5_T14_DEPTH)

    # F5_s15 → F5_t16 (revolve, cut)
    with BuildSketch(Plane(origin=(22.0908443761, -5.08, 18.9605648947), x_dir=(-0.7071067812, -0.7071067812, 0), z_dir=(-0.7071067812, 0.7071067812, 0))):
        with BuildLine():
            ThreePointArc((0, -5.08), (5.08, 0), (0, 5.08))
            Line((0, 5.08), (0, -5.08))
        make_face()
    revolve(axis=Axis((22.0908443761, -5.08, 18.9605648947), (0, 0, 1)), mode=Mode.SUBTRACT)


with BuildPart() as f1_7:
    add(f1_6.part)

    # F5_t11: cut F5_tool12
    add(f5_tool12.part, mode=Mode.SUBTRACT)

    # F5_s17 → F5_t18 (revolve, cut)
    with BuildSketch(Plane.XZ.offset(5.0800000001)):
        with BuildLine():
            ThreePointArc((-30.1759149879, 18.9605648947), (-28.6880174363, 22.5526673431), (-25.0959149879, 24.0405648947))
            Line((-25.0959149879, 24.0405648947), (-30.1759149879, 24.0405648947))
            Line((-30.1759149879, 24.0405648947), (-30.1759149879, 18.9605648947))
        make_face()
    revolve(axis=Axis((-25.0959149878, -5.0800000001, 24.0405648947), (0, 0, -1)), revolution_arc=F5_T18_ANGLE, mode=Mode.SUBTRACT)

    # F6 (cut): a face of the model
    f6_faces = [f1_7.faces().sort_by_distance(p)[0] for p in [
        (-1.5025353059, -25.4, 0.5008457229),
    ]]
    extrude(f6_faces, amount=-F6_DEPTH, mode=Mode.SUBTRACT)


solid = f1_7.part
